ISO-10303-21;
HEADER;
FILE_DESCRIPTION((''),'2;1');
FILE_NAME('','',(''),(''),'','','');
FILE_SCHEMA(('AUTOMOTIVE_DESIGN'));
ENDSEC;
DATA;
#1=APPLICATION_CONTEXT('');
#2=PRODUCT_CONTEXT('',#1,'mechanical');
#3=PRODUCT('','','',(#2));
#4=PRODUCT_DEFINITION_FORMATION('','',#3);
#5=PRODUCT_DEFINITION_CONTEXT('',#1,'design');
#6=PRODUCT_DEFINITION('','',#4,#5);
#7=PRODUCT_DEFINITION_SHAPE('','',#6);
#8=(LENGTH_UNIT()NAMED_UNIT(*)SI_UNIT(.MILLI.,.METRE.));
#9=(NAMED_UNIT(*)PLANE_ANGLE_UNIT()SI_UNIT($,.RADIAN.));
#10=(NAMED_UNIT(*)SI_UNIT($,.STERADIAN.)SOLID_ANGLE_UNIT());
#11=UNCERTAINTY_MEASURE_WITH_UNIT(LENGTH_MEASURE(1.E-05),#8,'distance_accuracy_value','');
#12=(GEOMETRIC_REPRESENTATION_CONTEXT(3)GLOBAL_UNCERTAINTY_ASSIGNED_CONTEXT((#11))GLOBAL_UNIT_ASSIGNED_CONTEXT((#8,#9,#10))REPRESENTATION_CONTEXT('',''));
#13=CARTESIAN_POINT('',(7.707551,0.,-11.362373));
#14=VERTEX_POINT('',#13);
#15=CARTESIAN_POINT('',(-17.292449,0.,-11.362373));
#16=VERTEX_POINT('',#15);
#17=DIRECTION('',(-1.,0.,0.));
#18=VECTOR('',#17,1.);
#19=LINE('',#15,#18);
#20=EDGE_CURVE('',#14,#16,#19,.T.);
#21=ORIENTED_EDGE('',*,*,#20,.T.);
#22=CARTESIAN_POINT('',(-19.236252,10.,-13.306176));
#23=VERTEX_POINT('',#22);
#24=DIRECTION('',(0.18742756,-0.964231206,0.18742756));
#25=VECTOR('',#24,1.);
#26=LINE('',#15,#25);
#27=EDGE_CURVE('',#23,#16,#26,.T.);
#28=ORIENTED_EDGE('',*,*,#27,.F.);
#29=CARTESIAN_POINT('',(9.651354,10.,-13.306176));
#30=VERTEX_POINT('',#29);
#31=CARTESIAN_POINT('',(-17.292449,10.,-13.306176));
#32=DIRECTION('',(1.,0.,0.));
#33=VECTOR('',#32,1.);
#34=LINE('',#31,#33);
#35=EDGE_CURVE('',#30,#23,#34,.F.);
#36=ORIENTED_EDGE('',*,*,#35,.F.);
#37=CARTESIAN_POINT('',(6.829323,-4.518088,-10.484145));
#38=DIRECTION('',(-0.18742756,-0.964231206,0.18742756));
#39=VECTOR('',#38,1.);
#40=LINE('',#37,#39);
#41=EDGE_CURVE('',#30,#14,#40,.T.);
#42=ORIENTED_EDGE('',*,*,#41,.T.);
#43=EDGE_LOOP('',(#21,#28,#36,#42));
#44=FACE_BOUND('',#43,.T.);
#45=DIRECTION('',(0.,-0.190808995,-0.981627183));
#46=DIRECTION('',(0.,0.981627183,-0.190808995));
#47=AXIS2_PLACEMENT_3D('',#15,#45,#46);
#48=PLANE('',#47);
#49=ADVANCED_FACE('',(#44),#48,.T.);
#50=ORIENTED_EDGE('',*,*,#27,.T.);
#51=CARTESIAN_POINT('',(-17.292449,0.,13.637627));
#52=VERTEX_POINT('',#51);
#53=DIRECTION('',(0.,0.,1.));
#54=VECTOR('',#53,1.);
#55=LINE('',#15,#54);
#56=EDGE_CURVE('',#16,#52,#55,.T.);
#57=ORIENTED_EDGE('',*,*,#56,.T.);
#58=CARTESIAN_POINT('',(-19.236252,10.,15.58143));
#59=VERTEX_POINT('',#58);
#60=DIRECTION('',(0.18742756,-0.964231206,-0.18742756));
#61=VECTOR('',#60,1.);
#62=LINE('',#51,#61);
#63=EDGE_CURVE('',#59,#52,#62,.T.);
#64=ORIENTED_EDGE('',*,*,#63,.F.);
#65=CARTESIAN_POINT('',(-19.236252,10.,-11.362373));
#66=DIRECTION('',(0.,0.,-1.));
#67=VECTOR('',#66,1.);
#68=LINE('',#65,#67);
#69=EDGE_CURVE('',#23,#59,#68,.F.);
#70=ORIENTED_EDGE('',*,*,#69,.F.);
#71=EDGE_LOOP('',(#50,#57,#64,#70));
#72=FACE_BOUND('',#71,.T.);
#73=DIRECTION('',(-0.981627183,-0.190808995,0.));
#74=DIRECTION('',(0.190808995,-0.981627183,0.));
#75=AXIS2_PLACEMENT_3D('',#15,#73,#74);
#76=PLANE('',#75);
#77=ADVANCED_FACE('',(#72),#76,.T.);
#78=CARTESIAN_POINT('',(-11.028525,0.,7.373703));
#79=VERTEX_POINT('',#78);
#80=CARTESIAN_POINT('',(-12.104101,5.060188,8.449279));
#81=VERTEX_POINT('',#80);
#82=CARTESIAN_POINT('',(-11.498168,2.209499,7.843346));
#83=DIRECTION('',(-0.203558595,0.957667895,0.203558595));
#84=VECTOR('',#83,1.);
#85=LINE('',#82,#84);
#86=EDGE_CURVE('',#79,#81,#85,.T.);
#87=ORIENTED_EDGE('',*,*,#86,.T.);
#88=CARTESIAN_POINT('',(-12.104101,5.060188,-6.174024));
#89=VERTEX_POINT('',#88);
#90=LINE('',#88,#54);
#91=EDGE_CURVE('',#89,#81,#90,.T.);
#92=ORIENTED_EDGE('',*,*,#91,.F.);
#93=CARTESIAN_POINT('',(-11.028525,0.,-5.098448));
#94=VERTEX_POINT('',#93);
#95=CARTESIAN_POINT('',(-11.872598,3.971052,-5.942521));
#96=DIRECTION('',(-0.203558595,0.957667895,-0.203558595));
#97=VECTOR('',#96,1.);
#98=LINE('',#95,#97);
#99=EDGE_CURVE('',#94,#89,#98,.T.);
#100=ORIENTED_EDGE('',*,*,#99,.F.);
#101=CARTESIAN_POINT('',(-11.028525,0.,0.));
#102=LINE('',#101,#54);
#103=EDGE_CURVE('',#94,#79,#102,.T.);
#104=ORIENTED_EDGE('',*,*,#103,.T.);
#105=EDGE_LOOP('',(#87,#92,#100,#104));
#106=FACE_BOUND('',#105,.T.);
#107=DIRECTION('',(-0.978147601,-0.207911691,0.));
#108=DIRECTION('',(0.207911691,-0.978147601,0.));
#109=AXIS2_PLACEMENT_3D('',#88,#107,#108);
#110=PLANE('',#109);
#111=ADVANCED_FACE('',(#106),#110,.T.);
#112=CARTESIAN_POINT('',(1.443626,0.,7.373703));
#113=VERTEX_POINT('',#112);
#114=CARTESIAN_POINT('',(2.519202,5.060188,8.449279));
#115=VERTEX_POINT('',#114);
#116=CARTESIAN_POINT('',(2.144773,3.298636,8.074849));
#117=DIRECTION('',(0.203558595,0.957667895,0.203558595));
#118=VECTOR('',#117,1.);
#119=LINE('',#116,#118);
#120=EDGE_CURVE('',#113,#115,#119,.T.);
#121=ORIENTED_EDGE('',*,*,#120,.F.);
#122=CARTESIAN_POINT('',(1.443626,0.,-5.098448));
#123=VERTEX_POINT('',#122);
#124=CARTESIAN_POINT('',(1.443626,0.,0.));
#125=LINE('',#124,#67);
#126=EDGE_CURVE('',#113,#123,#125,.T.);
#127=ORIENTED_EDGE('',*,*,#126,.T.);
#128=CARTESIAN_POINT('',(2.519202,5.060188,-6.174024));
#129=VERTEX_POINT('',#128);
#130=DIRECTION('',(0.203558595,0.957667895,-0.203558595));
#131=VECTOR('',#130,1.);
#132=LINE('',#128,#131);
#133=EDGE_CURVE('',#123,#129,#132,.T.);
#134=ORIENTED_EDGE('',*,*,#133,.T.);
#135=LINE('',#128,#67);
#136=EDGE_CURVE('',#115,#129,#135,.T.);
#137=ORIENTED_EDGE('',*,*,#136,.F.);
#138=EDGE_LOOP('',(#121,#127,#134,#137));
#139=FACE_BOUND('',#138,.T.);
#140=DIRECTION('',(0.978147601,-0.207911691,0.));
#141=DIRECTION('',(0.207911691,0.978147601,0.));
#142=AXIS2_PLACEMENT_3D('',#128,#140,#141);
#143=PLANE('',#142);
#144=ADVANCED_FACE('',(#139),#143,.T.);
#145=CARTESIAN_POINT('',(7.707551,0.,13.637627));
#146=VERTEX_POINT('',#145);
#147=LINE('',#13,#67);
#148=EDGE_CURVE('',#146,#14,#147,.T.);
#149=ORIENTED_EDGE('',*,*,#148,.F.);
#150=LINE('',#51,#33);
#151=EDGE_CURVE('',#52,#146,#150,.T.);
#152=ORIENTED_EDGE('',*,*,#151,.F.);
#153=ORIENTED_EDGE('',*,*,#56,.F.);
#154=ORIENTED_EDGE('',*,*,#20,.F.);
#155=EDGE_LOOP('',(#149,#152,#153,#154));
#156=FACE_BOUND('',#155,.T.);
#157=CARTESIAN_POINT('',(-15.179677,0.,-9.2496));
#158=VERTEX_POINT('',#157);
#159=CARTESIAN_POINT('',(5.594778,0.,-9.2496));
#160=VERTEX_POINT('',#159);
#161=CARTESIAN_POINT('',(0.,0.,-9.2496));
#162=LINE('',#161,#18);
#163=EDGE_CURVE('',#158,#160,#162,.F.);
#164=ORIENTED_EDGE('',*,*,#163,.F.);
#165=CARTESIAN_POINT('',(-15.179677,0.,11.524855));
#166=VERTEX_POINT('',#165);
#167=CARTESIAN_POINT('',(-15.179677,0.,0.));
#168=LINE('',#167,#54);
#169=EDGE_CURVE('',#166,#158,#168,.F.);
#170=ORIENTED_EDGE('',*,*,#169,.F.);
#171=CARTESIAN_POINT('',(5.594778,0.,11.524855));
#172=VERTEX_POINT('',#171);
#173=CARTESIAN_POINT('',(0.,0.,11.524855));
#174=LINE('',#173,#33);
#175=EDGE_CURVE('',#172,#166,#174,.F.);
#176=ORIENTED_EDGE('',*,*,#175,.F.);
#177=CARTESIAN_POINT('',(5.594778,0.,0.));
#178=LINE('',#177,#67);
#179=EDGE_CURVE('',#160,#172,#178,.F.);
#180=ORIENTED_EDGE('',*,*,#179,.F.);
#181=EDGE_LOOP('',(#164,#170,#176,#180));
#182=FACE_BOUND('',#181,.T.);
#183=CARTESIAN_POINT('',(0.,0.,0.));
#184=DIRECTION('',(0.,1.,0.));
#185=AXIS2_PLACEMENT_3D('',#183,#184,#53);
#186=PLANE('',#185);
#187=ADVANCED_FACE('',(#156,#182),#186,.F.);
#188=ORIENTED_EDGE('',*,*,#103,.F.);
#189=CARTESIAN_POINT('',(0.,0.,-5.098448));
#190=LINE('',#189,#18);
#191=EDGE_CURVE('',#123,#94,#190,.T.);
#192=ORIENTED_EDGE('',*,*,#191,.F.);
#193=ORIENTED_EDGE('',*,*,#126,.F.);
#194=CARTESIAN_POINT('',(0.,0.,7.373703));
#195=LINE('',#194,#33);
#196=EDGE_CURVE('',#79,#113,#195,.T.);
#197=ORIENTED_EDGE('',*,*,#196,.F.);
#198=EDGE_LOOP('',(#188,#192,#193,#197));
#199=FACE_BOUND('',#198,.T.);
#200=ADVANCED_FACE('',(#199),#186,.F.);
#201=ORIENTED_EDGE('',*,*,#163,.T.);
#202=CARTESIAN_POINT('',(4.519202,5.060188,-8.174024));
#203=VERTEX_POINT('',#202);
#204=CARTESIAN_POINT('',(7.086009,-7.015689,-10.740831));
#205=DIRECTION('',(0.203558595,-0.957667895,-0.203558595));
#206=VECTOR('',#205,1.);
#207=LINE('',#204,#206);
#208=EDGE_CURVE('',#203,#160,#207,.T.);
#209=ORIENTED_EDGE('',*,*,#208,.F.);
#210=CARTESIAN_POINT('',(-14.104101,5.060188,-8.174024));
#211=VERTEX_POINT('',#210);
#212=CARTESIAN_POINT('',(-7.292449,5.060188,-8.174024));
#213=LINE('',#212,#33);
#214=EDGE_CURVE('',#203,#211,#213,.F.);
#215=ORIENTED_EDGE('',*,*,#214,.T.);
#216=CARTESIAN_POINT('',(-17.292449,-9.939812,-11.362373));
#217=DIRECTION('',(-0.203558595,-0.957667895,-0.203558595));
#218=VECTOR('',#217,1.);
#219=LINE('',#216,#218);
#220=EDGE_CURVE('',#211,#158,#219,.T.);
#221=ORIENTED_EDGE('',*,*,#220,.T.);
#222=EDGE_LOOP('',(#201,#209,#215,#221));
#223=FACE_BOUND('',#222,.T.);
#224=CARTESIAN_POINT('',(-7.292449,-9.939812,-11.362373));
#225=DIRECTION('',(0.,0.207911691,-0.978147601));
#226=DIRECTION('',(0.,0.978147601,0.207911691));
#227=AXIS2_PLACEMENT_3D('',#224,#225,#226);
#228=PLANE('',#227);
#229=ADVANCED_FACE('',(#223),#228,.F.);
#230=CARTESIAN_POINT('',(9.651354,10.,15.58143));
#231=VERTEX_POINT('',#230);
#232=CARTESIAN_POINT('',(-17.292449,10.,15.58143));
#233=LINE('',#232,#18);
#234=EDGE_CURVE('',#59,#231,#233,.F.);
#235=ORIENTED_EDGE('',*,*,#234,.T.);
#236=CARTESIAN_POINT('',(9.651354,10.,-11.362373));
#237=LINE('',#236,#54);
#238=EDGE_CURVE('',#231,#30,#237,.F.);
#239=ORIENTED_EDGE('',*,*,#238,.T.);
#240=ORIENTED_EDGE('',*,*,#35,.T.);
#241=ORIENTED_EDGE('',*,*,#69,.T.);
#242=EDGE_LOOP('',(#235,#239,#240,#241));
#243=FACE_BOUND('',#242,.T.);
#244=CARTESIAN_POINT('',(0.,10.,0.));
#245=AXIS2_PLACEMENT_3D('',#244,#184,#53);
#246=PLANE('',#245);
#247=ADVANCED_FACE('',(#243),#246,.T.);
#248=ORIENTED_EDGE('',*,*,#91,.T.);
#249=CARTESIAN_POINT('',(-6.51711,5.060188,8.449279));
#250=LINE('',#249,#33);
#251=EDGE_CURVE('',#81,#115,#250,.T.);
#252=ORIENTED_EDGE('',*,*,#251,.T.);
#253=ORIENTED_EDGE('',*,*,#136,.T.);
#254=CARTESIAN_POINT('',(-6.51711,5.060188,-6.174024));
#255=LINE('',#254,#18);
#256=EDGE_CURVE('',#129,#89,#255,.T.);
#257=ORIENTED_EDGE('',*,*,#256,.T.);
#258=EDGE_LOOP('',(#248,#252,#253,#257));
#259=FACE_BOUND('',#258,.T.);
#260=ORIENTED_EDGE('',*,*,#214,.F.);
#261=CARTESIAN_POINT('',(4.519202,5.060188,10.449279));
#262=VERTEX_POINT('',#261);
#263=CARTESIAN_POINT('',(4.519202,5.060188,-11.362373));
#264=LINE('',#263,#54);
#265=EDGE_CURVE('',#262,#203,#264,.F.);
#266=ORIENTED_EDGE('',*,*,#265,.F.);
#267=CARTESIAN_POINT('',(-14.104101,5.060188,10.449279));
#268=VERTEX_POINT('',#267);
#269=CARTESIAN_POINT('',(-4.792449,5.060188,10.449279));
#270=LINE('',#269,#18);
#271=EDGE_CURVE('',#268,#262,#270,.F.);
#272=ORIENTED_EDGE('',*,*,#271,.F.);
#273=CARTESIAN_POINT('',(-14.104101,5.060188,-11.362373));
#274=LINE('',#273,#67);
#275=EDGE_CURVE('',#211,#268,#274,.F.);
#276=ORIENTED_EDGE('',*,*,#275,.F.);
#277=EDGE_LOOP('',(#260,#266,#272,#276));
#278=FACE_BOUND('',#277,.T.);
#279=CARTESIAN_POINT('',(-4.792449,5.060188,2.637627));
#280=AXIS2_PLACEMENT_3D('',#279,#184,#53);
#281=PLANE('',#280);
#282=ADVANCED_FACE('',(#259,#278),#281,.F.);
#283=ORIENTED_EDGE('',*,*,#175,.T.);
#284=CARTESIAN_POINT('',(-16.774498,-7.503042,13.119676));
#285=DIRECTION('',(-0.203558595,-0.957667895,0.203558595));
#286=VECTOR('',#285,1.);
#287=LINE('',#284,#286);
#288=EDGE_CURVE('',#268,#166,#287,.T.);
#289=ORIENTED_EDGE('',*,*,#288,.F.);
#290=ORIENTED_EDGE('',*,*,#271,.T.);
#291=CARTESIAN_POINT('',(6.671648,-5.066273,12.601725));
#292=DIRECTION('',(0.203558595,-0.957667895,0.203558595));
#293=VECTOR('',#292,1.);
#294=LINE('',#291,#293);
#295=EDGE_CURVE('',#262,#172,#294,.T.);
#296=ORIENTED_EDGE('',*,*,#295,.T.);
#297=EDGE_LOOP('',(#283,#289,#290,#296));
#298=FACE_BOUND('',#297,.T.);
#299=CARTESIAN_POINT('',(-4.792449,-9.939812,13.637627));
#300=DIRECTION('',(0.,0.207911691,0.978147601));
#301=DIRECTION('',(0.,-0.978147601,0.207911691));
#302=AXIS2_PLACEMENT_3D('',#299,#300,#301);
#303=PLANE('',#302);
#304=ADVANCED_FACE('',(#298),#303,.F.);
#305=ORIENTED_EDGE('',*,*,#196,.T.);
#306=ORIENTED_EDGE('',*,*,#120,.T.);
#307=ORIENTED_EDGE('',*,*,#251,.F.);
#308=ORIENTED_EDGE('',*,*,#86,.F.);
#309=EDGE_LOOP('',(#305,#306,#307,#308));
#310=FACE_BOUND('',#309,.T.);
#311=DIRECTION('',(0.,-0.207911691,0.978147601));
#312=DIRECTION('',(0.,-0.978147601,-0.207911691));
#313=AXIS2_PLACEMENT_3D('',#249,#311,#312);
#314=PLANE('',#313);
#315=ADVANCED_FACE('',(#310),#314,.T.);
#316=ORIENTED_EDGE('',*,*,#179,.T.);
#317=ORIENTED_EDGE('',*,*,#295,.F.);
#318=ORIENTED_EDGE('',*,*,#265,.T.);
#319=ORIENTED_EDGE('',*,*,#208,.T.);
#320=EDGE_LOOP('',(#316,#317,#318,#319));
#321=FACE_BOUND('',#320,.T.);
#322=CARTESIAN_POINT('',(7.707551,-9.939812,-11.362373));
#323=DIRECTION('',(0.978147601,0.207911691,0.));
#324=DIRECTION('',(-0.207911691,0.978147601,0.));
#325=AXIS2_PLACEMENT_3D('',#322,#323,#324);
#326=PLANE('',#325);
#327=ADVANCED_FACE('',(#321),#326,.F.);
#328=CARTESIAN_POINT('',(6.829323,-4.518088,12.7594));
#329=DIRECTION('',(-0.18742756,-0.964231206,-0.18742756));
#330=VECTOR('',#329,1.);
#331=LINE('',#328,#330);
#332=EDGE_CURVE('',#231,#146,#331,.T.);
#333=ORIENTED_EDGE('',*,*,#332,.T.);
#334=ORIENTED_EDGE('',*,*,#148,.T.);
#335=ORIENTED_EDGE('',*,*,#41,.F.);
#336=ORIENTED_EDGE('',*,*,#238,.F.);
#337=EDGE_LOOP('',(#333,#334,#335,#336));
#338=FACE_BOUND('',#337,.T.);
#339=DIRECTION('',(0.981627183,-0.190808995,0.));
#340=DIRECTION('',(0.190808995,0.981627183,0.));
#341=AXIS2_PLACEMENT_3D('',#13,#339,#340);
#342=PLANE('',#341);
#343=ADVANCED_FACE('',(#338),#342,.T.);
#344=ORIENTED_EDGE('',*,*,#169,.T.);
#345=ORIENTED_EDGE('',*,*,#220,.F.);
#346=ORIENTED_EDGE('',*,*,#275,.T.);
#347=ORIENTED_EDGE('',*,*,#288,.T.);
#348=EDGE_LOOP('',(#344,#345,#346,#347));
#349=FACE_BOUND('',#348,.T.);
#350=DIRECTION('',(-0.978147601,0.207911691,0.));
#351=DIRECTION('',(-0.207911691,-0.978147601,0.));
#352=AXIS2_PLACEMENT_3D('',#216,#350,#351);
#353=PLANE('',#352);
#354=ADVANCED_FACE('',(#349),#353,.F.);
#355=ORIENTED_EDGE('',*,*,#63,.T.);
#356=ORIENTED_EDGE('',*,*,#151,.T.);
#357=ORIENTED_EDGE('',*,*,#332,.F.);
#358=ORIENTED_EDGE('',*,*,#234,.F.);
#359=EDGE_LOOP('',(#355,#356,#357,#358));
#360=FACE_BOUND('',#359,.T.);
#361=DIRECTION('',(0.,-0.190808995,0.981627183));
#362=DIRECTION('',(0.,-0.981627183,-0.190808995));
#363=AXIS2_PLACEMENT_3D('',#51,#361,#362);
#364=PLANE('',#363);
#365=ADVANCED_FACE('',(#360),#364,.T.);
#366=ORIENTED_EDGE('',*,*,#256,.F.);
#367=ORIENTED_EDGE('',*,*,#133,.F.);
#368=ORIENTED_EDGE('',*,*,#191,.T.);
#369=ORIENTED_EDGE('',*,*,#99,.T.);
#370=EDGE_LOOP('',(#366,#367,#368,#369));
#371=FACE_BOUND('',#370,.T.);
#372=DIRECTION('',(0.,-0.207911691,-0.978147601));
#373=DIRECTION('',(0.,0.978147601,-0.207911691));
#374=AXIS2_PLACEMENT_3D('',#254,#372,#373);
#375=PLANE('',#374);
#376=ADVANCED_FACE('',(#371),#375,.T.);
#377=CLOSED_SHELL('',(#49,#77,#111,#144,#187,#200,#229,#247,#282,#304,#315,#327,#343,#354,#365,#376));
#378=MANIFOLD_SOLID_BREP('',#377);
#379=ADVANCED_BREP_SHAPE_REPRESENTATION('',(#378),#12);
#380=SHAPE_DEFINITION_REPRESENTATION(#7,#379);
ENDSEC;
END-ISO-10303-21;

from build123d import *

# Parameters (mm, degrees)
SKETCH1_W           = 25
SKETCH1_H           = 25
BOSS_EXTRUDE1_DEPTH = 10
BOSS_EXTRUDE1_DRAFT = -11
CAVITY1_OUTLINE_W   = 18.62330315
CAVITY1_OUTLINE_H   = 18.62330315
CAVITY1_OUTLINE_W_2 = 14.62330315
CAVITY1_OUTLINE_H_2 = 14.62330315
CAVITY1_DEPTH       = 5.060188455
CAVITY1_DRAFT       = 12


# Read off the part's stored shape, not the designer's step: Cavity1
with BuildPart() as part:
    # Sketch1 → Boss-Extrude1 (with draft: the straight prism first)
    with BuildSketch(Plane(origin=(0, 0, 0), x_dir=(1, 0, 0), z_dir=(0, 1, 0))):
        with Locations((-4.792449363, -1.137627393)):
            Rectangle(SKETCH1_W, SKETCH1_H)
    extrude(amount=BOSS_EXTRUDE1_DEPTH)
    # Boss-Extrude1: the draft: its side faces are tilted about the plane it starts from
    boss_extrude1_sides = [part.faces().sort_by_distance(p)[0] for p in [
        (-17.292449363, 5, 1.137627393),
        (-4.792449363, 5, 13.637627393),
        (7.707550637, 5, 1.137627393),
        (-4.792449363, 5, -11.362372607),
    ]]
    draft(boss_extrude1_sides, Plane(origin=(0, 0, 0), x_dir=(1, 0, 0), z_dir=(0, 1, 0)), BOSS_EXTRUDE1_DRAFT)


with BuildPart() as cavity1_tool:
    # Cavity1 outline → Cavity1 (with draft: the straight prism first)
    with BuildSketch(Plane(origin=(0, 5.060188455, 0), x_dir=(1, 0, 0), z_dir=(0, 1, 0))):
        with Locations((-4.792449363, -1.137627393)):
            Rectangle(CAVITY1_OUTLINE_W, CAVITY1_OUTLINE_H)
        with Locations((-4.792449363, -1.137627393)):
            Rectangle(CAVITY1_OUTLINE_W_2, CAVITY1_OUTLINE_H_2, mode=Mode.SUBTRACT)
    extrude(amount=-CAVITY1_DEPTH)
    # Cavity1: the draft: its side faces are tilted about the plane it starts from
    cavity1_sides = [cavity1_tool.faces().sort_by_distance(p)[0] for p in [
        (-14.104100938, 2.530094227, 1.137627393),
        (-4.792449363, 2.530094227, 10.449278968),
        (4.519202212, 2.530094227, 1.137627393),
        (-4.792449363, 2.530094227, -8.174024182),
        (2.519202212, 2.530094227, 1.137627393),
        (-4.792449363, 2.530094227, 8.449278968),
        (-12.104100938, 2.530094227, 1.137627393),
        (-4.792449363, 2.530094227, -6.174024182),
    ]]
    draft(cavity1_sides, Plane(origin=(0, 5.060188455, 0), x_dir=(1, 0, 0), z_dir=(0, 1, 0)), CAVITY1_DRAFT)


with BuildPart() as part_1:
    add(part.part)

    # Cavity1: cut by cavity1_tool
    add(cavity1_tool.part, mode=Mode.SUBTRACT)


solid = part_1.part
